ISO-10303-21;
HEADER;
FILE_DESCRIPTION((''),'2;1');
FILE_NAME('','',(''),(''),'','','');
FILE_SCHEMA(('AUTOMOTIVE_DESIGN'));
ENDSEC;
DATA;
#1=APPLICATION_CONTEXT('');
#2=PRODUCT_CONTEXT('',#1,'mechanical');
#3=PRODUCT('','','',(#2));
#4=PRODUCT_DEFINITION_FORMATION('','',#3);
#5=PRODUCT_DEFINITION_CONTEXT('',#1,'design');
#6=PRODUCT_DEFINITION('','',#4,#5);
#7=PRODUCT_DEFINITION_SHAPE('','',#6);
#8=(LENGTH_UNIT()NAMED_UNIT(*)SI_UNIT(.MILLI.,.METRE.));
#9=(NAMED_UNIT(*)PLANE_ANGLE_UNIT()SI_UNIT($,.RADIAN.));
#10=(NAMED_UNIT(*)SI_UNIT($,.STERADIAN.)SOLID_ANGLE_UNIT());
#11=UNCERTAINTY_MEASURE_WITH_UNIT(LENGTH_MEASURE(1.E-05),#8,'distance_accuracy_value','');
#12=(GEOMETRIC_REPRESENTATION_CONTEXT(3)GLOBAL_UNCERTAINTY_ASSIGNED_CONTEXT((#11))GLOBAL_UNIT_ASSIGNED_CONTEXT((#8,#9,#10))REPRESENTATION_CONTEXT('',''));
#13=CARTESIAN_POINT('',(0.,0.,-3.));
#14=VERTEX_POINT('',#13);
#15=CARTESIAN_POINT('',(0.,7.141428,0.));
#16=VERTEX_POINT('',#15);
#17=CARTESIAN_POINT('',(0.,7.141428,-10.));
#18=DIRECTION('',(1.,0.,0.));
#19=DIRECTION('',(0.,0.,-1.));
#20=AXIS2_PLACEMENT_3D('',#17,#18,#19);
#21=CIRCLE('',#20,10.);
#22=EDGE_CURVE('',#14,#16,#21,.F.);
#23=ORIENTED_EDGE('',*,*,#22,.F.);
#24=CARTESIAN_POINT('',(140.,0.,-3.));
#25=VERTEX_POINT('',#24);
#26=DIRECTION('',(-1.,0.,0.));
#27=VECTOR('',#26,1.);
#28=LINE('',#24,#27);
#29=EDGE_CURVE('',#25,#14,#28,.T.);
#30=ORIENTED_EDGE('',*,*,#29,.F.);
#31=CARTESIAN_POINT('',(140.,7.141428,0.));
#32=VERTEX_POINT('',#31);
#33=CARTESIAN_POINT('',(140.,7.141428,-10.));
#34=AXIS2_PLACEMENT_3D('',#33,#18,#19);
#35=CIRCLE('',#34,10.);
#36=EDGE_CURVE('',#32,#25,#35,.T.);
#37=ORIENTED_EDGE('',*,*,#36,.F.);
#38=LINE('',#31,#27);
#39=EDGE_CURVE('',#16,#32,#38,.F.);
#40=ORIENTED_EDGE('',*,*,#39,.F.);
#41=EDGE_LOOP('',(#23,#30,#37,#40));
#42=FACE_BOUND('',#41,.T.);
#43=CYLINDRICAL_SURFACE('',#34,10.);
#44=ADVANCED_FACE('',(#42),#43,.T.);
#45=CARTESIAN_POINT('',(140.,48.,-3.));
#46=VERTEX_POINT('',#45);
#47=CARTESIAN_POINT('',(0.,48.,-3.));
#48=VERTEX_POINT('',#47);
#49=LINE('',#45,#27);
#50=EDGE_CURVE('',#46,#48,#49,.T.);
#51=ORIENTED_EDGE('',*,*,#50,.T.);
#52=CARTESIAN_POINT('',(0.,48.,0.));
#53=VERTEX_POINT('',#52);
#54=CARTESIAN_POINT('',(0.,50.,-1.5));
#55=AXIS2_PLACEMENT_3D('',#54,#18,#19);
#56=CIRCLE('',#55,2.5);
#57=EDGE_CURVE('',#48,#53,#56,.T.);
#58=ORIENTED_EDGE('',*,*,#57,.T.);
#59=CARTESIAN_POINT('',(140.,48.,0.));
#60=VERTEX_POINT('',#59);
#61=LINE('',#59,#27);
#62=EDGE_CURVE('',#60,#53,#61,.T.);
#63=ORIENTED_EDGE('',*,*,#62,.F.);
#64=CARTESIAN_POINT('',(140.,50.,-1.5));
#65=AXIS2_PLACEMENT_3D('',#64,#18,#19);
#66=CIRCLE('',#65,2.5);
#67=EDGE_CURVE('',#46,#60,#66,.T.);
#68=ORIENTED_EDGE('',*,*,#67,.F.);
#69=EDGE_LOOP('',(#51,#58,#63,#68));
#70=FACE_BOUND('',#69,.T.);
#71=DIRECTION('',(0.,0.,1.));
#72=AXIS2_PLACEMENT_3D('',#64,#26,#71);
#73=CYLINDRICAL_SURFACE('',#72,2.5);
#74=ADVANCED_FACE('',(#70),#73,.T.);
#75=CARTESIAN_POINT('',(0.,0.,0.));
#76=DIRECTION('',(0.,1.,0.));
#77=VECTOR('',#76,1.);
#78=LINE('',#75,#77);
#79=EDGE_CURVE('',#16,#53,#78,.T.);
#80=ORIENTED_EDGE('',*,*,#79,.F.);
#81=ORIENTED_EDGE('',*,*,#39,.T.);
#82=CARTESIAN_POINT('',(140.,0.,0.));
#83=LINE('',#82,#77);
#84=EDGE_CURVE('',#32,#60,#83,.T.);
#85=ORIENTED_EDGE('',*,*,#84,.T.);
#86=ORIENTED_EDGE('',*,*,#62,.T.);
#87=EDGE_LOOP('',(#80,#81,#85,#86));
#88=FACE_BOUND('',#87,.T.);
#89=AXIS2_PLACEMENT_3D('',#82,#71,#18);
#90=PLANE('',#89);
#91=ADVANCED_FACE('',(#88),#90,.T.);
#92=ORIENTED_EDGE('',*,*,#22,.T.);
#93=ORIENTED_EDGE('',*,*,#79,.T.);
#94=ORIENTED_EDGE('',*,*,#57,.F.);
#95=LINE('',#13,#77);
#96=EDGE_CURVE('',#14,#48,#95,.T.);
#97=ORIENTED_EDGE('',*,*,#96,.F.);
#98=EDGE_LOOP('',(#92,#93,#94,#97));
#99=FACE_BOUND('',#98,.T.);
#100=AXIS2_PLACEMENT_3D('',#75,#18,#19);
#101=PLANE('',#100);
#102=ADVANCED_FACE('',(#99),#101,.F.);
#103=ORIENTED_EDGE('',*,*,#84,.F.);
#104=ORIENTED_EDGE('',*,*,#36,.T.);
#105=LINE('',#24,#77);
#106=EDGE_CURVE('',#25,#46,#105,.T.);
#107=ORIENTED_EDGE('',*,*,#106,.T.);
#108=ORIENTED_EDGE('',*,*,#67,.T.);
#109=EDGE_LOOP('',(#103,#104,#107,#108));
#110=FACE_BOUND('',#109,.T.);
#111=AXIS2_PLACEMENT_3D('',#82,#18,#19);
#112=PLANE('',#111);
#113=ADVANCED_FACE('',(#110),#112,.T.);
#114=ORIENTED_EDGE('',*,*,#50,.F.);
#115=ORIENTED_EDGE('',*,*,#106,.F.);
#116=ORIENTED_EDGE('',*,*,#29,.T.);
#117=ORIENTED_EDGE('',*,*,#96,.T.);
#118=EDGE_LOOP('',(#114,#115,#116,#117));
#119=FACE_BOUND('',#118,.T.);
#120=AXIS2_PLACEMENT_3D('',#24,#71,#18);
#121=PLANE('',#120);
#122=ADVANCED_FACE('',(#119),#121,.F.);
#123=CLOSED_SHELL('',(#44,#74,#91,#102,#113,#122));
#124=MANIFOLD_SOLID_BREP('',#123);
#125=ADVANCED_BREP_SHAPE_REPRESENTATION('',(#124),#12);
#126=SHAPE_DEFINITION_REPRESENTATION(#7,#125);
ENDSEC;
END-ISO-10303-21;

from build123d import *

# Parameters (mm, degrees)
BOSS_EXTRUDE1_DEPTH = 140
FILLET1_R           = 10


with BuildPart() as part:
    # Sketch1 → Boss-Extrude1 (new body)
    with BuildSketch(Plane(origin=(0, 0, 0), x_dir=(0, 0, -1), z_dir=(1, 0, 0))):
        with BuildLine():
            ThreePointArc((4, 50), (0.381966011, 52.236067977), (0, 48))
            Line((0, 48), (0, 50))
            Line((0, 50), (3, 50))
            Line((3, 50), (3, 48))
            ThreePointArc((3, 48), (3.736067977, 48.881966011), (4, 50))
        make_face()
        with BuildLine():
            Line((0, 50), (0, 48))
            ThreePointArc((0, 48), (1.5, 47.5), (3, 48))
            Line((3, 48), (3, 50))
            Line((3, 50), (0, 50))
        make_face()
        with BuildLine():
            Line((0, 48), (0, 0))
            Line((0, 0), (3, 0))
            Line((3, 0), (3, 48))
            ThreePointArc((3, 48), (1.5, 47.5), (0, 48))
        make_face()
    extrude(amount=BOSS_EXTRUDE1_DEPTH)

    # Fillet1
    # the kernel refuses this fillet: 10 mm, written as the material it takes off along each edge
    with BuildSketch(Plane(origin=(-17.853571071, 0, 0), x_dir=(0, 1, 0), z_dir=(1, 0, 0))) as fillet1_piece_1:
        with BuildLine():
            CenterArc((7.141428429, -10), FILLET1_R, 90, 45.572995999)
            Line((0, -3), (-0.142828569, -2.86))
            ThreePointArc((-0.142828569, -2.86), (-0.2, -1.5), (-0.2, 0))
            Line((-0.2, 0), (0, 0.2))
            Line((0, 0.2), (7.141428429, 0.2))
            Line((7.141428429, 0.2), (7.141428429, 0))
        make_face()
    extrude(amount=175.707142143, mode=Mode.SUBTRACT)


solid = part.part
